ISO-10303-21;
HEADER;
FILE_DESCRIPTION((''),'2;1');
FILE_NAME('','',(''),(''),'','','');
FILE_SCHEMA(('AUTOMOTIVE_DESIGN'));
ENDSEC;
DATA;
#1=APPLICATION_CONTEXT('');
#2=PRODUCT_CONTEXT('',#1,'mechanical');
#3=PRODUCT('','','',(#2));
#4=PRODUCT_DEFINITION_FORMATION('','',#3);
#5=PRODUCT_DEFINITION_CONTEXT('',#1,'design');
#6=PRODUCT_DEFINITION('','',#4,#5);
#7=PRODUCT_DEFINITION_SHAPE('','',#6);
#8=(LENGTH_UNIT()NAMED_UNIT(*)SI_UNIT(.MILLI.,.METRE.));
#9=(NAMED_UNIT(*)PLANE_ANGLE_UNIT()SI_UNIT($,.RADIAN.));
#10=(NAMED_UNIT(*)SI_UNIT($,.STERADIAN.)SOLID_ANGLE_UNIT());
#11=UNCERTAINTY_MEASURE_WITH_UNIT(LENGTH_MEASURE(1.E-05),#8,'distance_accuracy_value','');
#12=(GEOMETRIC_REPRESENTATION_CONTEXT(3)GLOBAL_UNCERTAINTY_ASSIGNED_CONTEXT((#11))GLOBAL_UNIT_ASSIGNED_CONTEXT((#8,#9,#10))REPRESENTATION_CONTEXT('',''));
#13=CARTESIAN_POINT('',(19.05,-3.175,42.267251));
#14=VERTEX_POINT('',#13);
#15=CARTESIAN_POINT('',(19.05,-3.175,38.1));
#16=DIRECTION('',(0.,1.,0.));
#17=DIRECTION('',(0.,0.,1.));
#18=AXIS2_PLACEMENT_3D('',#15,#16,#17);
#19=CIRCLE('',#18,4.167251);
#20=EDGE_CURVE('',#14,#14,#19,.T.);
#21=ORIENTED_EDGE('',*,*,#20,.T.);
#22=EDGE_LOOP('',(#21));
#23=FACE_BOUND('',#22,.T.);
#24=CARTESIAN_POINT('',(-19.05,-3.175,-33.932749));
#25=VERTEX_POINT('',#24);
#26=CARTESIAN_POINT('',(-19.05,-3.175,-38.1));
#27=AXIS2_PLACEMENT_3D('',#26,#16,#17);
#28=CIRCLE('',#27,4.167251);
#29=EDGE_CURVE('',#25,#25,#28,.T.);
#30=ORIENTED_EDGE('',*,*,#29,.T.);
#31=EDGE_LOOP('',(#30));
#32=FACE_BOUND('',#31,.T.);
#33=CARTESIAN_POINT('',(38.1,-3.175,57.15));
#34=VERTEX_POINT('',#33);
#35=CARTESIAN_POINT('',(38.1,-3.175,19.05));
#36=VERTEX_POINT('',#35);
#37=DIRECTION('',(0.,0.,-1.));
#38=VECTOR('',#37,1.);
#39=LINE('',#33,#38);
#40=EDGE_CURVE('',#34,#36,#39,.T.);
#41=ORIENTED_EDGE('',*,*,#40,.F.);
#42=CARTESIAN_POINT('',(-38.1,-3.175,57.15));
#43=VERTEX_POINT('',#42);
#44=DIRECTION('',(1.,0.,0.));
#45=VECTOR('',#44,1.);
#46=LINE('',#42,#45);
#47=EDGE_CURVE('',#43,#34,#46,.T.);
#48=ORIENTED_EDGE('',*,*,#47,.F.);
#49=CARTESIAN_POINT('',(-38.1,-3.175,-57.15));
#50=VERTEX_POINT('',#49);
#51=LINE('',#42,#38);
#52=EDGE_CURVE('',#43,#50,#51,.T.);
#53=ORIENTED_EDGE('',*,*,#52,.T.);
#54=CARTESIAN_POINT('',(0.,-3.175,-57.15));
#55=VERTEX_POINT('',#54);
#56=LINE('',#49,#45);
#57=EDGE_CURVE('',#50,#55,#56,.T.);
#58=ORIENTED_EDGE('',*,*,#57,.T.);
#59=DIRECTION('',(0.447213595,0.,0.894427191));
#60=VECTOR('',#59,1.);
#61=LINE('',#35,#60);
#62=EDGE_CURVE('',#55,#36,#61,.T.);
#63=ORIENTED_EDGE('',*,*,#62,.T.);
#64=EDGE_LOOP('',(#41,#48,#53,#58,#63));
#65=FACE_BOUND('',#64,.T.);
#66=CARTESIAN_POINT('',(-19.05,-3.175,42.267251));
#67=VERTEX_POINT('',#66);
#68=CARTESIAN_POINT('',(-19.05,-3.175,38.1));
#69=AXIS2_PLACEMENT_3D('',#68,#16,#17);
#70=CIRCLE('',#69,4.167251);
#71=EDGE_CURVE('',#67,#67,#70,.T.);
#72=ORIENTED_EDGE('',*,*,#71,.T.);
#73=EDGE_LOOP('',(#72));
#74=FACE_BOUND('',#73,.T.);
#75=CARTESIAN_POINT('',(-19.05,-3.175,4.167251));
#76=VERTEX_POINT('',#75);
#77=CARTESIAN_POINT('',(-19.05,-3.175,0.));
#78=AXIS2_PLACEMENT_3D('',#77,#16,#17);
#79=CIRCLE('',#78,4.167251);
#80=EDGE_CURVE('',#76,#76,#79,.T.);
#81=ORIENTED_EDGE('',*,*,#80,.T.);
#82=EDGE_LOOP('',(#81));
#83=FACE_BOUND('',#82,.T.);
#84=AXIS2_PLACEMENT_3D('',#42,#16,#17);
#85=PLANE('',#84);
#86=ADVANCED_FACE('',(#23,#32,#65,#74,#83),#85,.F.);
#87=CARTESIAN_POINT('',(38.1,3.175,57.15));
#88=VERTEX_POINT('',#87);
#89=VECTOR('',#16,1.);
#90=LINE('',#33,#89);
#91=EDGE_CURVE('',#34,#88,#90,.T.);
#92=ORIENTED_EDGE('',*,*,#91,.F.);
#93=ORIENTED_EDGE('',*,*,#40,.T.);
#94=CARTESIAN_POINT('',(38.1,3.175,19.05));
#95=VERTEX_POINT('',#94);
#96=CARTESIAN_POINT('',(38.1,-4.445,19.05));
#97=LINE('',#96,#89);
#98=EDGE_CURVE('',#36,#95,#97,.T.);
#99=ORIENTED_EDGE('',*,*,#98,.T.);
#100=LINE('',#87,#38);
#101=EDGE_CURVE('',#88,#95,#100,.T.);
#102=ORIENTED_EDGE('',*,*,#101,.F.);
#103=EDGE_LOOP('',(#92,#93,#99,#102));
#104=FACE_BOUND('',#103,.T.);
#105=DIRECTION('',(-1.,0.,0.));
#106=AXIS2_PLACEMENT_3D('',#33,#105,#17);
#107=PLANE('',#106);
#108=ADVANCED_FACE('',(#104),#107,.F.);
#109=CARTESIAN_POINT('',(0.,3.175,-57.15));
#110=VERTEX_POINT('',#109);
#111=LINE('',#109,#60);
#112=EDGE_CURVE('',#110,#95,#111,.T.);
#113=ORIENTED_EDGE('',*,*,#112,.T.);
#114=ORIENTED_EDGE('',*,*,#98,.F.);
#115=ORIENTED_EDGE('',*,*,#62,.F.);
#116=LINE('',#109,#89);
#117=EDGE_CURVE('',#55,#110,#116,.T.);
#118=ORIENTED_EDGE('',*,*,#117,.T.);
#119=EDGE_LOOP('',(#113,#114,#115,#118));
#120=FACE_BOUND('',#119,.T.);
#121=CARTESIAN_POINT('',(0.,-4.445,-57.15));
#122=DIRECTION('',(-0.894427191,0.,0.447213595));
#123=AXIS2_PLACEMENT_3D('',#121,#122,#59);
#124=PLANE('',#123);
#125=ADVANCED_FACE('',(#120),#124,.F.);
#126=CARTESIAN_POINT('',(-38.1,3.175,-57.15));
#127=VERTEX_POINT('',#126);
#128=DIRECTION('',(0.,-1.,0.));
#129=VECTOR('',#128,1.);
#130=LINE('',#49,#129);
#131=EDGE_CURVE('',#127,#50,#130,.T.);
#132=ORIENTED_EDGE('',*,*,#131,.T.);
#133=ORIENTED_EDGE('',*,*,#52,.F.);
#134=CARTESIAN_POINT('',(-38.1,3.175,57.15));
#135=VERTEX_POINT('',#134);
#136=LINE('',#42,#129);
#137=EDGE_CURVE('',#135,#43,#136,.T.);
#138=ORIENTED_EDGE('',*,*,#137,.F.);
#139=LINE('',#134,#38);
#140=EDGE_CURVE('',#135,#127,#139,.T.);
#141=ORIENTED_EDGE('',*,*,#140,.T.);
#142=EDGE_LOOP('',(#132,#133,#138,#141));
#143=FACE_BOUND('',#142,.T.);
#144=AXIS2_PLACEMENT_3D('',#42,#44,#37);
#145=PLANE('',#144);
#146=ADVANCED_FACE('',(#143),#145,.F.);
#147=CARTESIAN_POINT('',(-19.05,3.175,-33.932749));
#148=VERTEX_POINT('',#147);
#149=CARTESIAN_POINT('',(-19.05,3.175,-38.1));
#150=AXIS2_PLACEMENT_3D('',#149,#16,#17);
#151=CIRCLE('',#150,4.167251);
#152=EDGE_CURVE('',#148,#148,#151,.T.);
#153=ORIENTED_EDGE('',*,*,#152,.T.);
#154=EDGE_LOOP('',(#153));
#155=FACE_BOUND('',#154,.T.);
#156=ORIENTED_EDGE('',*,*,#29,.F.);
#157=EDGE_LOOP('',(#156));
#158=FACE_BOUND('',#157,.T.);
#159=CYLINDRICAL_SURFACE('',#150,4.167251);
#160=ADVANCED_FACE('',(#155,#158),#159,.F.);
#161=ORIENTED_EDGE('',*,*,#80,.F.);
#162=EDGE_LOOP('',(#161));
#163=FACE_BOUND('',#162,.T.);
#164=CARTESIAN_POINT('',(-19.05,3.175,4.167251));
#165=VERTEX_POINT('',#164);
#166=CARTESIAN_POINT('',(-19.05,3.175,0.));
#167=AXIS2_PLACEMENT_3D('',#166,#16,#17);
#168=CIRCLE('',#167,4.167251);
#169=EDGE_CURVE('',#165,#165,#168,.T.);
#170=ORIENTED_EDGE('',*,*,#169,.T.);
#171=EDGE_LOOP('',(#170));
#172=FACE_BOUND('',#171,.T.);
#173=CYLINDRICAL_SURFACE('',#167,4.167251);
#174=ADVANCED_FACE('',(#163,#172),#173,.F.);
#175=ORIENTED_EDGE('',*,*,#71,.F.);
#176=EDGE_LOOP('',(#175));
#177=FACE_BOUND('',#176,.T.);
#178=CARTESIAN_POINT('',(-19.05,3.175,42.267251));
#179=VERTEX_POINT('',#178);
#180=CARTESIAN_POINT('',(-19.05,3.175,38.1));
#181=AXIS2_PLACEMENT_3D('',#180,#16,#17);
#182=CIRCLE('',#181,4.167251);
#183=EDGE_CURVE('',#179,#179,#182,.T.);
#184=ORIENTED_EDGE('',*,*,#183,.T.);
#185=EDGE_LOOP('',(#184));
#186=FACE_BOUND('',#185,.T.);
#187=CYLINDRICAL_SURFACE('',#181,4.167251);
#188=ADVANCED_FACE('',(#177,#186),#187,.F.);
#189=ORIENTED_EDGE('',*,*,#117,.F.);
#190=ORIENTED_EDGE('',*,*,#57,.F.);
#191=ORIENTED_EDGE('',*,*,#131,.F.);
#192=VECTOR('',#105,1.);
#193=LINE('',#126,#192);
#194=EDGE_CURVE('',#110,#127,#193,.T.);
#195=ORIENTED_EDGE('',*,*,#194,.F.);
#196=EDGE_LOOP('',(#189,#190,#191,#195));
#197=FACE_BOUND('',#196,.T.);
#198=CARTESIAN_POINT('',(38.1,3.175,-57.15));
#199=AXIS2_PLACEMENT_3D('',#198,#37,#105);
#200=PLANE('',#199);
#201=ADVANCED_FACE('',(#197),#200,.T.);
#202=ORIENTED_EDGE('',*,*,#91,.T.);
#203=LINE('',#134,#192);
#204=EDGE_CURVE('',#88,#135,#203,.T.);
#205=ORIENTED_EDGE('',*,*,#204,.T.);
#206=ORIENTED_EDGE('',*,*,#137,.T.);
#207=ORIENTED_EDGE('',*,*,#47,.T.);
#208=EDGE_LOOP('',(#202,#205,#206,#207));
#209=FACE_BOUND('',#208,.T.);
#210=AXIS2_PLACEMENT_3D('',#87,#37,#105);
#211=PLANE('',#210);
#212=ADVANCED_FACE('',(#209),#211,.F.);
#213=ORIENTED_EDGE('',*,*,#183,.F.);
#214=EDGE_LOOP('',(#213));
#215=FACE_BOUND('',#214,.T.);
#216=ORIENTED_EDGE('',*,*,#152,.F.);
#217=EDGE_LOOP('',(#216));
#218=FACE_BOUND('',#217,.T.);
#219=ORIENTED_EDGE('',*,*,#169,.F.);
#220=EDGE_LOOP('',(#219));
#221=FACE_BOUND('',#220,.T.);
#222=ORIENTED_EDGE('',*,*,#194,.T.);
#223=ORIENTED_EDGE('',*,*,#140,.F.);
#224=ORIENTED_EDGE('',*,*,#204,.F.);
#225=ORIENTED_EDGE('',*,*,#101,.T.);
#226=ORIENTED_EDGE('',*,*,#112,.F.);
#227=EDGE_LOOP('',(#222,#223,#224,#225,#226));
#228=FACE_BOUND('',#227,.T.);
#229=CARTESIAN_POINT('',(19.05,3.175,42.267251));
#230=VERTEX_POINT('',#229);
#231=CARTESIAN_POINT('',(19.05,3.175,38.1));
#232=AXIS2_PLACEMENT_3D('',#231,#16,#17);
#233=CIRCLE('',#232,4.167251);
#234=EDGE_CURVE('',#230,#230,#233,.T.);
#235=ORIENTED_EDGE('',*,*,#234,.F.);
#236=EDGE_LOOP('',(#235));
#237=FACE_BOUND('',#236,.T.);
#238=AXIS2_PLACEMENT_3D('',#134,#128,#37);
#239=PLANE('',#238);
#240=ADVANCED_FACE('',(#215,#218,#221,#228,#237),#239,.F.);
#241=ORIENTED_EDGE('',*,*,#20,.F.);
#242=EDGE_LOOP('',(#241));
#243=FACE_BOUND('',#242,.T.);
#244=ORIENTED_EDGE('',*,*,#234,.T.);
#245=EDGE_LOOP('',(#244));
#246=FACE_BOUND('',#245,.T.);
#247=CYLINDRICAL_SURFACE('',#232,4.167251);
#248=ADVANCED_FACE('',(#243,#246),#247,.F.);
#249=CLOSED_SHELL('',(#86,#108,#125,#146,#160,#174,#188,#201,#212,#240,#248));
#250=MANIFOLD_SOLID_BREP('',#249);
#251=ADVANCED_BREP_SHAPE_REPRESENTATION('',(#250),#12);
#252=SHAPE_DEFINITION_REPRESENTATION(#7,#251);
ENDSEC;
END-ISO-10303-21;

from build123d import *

# Parameters (mm, degrees)
SKETCH1_W            = 76.2
SKETCH1_H            = 6.35
BOSS_EXTRUDE1_DEPTH  = 57.15
CUT_EXTRUDE3_DEPTH   = 7.62
LPATTERN1_COUNT      = 3
LPATTERN1_PITCH      = 38.1
LPATTERN1_COUNT_DIR2 = 2
LPATTERN1_PITCH_DIR2 = 38.1


with BuildPart() as part:
    # Sketch1 → Boss-Extrude1 (new, symmetric)
    with BuildSketch(Plane.XY):
        Rectangle(SKETCH1_W, SKETCH1_H)
    extrude(amount=BOSS_EXTRUDE1_DEPTH, both=True)

    # Sketch8 → Cut-Extrude3 (cut)
    with BuildSketch(Plane(origin=(0, 3.175, 0), x_dir=(-1, 0, 0), z_dir=(0, 1, 0))):
        Polygon((0, -57.15), (-38.1, 19.05), (-38.1, -57.15), align=None)
    extrude(amount=-CUT_EXTRUDE3_DEPTH, mode=Mode.SUBTRACT)

    # Sketch9 → 21/64 (0.32813) Diameter Hole1 (revolve, cut)
    with BuildSketch(Plane(origin=(-19.05, 3.175, 38.1), x_dir=(0, 0, 1), z_dir=(1, 0, 0))):
        Polygon((0, 0), (0, 8.853937016), (4.167251, 6.35), (4.167251, 0), align=None)
    f_21_64_0_32813_diameter_hole1 = revolve(axis=Axis((-19.05, 9.525, 38.1), (0, -1, 0)), mode=Mode.SUBTRACT)

    # LPattern1: 21_64 _0.32813_ Diameter Hole1 3 × 2, 2 skipped
    with Locations(*[(j * LPATTERN1_PITCH_DIR2, 0, -i * LPATTERN1_PITCH) for i in range(LPATTERN1_COUNT) for j in range(LPATTERN1_COUNT_DIR2) if (i, j) not in ((0, 0), (1, 1), (2, 1))]):
        add(f_21_64_0_32813_diameter_hole1, mode=Mode.SUBTRACT)


solid = part.part
